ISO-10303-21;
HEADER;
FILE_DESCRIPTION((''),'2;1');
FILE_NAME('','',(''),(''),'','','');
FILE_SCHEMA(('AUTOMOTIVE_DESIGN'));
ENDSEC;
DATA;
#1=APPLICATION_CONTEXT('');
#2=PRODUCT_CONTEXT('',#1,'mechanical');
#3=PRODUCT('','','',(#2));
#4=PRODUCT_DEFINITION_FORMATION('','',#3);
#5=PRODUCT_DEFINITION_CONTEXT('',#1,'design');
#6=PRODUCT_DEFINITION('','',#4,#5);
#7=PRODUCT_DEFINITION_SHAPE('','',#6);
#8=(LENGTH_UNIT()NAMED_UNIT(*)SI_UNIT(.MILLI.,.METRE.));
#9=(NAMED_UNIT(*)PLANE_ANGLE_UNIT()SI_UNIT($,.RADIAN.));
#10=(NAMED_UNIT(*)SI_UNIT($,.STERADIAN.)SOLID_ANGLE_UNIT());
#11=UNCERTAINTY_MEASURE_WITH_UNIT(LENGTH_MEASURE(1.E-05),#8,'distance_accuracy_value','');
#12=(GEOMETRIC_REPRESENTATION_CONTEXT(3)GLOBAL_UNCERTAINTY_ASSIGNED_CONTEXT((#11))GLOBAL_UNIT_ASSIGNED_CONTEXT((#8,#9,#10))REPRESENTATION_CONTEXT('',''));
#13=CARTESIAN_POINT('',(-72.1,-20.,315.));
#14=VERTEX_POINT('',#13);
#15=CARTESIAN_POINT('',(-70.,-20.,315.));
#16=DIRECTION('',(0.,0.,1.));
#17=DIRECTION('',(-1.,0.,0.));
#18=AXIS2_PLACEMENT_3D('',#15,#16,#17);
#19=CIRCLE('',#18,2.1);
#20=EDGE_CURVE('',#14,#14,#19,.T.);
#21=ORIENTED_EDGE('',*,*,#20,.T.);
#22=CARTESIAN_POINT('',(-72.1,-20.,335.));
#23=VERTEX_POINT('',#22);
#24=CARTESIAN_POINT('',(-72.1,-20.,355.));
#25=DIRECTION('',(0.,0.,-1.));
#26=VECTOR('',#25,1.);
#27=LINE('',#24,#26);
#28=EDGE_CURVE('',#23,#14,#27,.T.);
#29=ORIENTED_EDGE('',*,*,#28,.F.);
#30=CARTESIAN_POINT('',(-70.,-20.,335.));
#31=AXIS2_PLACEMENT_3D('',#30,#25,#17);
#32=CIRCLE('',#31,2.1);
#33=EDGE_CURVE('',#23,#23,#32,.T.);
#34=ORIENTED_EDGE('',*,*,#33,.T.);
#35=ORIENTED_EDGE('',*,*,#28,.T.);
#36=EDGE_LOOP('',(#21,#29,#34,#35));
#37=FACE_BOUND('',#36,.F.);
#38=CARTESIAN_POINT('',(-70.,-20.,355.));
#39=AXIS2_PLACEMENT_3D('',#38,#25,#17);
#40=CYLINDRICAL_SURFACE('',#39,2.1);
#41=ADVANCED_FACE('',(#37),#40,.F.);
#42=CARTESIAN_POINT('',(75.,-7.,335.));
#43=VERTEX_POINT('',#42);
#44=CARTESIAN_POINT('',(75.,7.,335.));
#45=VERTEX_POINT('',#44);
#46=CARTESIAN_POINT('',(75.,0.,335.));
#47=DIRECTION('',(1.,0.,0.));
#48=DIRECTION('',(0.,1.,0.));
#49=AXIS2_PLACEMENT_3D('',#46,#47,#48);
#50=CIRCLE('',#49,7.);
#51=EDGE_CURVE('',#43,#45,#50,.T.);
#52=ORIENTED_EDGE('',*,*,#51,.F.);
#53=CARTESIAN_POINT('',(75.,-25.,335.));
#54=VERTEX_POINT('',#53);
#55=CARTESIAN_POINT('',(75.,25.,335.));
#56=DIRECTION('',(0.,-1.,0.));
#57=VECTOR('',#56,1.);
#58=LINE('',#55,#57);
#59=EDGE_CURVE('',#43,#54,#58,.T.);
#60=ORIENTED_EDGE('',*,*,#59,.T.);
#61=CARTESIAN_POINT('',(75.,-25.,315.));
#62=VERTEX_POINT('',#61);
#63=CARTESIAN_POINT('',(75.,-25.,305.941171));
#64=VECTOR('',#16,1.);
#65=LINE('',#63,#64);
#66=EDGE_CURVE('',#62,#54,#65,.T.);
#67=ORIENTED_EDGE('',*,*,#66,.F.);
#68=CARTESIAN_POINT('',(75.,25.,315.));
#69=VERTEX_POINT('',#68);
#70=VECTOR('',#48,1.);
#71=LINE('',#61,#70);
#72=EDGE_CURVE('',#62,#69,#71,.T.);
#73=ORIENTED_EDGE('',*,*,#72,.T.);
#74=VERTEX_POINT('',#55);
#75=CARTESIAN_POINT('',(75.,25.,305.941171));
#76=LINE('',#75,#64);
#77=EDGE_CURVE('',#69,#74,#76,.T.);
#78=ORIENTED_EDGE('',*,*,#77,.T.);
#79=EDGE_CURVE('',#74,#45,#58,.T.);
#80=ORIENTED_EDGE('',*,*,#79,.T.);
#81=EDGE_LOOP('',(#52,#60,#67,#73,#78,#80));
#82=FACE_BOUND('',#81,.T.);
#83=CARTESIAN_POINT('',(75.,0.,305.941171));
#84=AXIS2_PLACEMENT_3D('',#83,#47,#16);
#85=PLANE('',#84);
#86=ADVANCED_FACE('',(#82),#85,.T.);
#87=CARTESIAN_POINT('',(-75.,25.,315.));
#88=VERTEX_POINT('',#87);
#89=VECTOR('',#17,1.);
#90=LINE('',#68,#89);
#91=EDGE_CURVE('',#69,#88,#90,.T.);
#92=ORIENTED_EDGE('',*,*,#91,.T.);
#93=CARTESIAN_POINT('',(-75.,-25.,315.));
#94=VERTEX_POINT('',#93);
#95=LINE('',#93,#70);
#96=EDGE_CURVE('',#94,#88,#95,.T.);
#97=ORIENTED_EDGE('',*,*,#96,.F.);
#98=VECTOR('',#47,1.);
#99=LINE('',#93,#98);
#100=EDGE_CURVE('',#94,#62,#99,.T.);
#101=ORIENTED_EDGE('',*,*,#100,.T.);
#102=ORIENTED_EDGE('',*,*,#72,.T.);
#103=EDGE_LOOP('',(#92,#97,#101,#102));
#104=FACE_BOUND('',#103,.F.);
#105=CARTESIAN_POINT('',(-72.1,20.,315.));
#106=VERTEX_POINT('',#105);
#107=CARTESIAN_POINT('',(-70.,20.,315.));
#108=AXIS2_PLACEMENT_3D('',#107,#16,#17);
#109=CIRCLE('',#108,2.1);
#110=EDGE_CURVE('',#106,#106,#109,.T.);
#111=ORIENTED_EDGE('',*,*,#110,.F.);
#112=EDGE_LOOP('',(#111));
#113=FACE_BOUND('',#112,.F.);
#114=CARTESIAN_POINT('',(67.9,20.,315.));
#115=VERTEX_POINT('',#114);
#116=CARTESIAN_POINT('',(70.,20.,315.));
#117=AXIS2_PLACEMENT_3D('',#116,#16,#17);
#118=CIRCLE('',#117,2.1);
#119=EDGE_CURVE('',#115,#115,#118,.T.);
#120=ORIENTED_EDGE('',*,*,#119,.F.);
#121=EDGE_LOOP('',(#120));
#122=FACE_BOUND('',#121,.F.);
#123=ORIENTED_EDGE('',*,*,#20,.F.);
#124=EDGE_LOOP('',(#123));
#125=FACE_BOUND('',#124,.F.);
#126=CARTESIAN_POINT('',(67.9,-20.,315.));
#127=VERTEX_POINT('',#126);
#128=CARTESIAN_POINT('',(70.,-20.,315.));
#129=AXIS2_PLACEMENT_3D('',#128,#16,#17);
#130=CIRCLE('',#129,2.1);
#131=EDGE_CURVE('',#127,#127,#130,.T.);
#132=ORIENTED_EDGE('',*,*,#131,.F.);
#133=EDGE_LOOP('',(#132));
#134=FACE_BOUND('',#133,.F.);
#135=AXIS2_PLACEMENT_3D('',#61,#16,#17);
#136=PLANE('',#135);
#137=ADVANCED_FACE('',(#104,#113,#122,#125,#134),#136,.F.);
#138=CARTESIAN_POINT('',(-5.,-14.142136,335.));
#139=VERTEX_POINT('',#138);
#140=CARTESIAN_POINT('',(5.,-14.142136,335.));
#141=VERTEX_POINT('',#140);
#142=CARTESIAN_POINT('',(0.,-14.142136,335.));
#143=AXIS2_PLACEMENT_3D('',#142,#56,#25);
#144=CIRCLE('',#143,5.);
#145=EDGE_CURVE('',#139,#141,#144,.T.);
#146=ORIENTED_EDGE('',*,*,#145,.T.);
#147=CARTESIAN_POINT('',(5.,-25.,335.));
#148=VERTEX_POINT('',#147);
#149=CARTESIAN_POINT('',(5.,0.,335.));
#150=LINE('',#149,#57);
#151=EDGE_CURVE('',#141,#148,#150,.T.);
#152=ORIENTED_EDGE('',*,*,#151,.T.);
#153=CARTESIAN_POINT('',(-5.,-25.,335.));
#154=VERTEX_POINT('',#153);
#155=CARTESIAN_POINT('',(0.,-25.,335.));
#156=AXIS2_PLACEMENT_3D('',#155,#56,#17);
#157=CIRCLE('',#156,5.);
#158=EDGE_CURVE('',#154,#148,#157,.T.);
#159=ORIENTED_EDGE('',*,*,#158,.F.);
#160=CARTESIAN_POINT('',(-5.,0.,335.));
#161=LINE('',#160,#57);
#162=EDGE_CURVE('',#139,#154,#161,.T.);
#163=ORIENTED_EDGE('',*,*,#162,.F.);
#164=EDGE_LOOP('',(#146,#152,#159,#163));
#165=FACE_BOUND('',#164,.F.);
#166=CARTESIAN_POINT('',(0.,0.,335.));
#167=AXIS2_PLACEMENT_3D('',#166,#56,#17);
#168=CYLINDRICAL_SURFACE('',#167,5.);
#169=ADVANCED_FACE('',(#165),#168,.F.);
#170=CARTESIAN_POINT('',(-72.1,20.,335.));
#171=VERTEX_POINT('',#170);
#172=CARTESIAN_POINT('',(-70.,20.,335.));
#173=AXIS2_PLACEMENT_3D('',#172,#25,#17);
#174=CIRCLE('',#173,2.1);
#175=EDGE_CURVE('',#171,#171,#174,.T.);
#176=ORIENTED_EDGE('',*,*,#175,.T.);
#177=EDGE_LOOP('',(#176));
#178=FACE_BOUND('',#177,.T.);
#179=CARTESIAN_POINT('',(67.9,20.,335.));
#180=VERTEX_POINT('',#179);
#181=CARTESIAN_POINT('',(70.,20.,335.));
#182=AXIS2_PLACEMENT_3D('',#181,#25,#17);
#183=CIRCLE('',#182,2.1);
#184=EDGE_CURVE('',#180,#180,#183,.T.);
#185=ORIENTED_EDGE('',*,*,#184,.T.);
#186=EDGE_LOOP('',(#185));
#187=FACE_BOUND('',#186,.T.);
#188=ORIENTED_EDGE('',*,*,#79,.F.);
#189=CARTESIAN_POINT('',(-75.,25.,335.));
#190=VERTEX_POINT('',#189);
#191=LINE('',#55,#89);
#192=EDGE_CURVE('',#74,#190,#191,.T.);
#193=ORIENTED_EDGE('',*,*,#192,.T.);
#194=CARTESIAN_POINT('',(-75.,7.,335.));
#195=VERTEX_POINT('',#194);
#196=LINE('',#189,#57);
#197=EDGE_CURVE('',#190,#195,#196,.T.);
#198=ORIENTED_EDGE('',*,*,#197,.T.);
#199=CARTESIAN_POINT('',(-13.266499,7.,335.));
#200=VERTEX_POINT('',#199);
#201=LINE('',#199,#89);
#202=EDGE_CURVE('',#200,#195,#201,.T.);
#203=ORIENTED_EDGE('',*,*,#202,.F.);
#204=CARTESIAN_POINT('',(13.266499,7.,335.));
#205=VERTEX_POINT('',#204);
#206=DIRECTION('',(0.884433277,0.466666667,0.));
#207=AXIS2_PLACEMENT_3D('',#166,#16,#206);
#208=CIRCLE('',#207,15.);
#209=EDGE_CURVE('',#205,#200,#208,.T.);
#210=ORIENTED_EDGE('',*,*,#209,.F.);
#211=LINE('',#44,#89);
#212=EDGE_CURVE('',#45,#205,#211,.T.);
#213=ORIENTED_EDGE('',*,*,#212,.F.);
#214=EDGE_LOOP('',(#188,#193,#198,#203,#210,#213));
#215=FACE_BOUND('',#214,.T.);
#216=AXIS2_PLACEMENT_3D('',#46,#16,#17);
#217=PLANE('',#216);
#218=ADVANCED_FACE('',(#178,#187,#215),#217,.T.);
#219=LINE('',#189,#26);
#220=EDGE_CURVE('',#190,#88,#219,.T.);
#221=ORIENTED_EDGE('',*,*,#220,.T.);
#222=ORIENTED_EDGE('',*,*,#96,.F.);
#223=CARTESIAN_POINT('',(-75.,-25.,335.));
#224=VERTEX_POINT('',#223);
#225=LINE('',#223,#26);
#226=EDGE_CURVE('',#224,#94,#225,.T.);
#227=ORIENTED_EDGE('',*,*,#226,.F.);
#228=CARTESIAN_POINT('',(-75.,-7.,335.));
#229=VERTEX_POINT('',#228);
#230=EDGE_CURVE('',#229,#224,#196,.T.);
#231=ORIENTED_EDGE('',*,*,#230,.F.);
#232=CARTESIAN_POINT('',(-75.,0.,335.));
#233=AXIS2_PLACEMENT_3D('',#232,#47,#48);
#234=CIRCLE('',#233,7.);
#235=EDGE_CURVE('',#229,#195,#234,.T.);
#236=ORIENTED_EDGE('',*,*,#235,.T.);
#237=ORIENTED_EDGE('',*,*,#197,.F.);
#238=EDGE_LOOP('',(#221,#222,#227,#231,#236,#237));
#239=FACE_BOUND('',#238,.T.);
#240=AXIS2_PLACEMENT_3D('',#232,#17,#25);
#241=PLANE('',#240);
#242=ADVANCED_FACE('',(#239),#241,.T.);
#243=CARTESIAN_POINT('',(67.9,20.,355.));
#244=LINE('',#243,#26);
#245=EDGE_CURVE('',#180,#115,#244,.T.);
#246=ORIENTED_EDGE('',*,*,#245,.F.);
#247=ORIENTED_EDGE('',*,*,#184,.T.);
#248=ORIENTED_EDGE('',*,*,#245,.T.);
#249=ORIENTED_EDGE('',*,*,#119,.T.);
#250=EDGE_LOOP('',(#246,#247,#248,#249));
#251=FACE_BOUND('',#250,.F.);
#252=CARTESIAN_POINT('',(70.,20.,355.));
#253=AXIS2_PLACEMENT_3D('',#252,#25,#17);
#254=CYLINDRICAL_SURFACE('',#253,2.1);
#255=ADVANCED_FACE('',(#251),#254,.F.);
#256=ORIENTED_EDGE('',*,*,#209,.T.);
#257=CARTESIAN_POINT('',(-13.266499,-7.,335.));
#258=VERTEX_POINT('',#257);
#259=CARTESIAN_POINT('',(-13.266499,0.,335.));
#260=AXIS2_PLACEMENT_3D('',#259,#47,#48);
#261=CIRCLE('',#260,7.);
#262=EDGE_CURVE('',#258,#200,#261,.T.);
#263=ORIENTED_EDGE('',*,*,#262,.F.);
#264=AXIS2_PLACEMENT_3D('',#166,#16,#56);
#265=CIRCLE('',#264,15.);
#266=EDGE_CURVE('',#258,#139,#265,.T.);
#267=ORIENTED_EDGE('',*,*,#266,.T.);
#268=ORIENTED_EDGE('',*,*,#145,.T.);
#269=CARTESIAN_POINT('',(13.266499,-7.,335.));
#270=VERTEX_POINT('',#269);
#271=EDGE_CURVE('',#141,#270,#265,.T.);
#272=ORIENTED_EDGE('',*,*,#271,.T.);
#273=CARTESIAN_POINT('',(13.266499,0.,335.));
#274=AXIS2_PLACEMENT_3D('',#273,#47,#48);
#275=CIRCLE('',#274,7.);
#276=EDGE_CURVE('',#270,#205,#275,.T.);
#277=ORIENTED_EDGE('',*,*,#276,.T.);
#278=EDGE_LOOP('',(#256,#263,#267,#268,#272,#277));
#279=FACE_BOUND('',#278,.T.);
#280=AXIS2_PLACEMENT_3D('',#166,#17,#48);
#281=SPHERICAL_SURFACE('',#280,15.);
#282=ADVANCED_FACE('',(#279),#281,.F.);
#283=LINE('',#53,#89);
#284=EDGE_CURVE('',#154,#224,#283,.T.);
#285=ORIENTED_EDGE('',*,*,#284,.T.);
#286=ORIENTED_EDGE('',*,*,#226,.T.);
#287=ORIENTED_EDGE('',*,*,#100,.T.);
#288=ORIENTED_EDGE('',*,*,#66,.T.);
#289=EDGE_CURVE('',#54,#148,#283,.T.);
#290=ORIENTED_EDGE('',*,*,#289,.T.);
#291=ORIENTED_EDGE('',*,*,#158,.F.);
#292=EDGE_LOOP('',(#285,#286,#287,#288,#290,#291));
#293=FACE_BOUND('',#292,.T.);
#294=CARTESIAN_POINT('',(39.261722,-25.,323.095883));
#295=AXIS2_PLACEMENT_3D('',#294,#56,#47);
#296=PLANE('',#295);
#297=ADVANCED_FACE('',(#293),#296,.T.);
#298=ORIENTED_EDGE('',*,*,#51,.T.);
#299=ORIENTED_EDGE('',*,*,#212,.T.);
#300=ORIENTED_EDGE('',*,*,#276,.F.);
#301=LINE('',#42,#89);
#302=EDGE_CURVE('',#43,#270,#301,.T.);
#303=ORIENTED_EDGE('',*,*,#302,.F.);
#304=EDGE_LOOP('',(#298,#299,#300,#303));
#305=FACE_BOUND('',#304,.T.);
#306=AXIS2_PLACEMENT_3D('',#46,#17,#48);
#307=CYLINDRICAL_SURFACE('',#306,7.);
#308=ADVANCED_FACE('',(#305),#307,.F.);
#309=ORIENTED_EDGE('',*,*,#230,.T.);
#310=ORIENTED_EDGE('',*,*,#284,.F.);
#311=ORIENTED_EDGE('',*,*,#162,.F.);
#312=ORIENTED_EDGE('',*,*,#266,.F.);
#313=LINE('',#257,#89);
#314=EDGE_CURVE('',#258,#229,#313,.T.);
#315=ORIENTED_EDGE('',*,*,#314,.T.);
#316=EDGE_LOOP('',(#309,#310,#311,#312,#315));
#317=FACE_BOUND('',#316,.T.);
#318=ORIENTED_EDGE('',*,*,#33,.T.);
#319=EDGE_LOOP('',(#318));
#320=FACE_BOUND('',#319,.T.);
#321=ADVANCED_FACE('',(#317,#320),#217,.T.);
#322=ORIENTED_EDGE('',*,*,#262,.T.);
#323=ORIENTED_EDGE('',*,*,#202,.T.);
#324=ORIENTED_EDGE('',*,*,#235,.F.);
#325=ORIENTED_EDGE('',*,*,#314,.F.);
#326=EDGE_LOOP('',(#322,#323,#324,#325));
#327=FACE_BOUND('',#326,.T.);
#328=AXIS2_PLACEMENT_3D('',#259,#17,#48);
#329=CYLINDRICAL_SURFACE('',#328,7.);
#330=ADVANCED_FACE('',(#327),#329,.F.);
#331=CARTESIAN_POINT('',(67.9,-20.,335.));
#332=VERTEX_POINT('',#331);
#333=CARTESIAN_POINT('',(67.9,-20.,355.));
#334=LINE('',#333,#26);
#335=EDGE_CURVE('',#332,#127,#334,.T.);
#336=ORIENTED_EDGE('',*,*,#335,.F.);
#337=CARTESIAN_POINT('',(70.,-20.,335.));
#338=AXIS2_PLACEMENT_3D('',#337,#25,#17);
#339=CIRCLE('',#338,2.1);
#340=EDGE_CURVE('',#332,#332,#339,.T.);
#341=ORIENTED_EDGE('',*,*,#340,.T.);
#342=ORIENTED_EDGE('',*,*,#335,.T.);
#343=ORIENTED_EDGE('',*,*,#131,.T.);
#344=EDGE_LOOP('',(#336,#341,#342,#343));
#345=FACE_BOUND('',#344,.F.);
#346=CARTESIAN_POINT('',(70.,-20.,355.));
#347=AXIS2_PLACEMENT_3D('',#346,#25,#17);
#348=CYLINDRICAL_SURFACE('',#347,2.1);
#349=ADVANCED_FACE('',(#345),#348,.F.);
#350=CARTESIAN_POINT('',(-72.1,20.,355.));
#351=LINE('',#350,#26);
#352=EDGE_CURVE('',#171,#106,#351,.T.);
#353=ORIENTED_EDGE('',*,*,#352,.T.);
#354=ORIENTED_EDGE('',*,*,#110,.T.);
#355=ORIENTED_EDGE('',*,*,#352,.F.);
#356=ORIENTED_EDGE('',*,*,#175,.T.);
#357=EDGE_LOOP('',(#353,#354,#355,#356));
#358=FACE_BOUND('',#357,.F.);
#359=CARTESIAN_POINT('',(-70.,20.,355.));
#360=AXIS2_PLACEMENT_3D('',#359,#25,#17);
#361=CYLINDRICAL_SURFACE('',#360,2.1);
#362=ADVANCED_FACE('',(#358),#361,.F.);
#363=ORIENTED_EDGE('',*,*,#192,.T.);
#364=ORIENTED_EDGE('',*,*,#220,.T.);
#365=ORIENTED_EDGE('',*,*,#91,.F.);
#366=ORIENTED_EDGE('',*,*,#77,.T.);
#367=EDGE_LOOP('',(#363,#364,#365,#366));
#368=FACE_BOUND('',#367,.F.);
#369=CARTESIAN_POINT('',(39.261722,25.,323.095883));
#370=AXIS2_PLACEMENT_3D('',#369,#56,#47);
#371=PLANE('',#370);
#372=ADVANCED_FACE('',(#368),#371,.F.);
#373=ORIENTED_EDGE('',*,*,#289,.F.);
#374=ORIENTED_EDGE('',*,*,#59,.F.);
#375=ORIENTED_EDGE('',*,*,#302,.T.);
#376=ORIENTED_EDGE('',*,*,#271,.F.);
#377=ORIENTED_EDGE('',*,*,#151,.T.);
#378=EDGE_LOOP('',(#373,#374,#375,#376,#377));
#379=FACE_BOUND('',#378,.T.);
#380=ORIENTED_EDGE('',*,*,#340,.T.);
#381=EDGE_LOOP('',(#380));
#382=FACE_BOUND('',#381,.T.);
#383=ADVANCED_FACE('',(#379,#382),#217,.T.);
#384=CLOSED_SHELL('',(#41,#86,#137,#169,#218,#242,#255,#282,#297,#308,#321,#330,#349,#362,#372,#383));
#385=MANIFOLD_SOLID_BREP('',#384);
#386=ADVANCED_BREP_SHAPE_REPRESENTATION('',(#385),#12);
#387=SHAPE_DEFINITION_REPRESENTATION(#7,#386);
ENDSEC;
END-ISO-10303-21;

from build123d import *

# Parameters (mm, degrees)
F1_DEPTH  = 25
F5_D      = 4.2
F5_DEPTH  = 20
F5_TIP    = 1.2618073
F10_DEPTH = 50.001


with BuildPart() as f1:
    # F0 (on Front) → F1 (new body, symmetric)
    with BuildSketch(Plane.XZ):
        with BuildLine():
            ThreePointArc((0, 315), (37.7725508345, 312.7270925319), (75, 305.9411708156))
            Line((75, 305.9411708156), (75, 335))
            Line((75, 335), (0, 335))
            Line((0, 335), (0, 315))
        make_face()
        with BuildLine():
            ThreePointArc((-75, 305.9411708156), (-37.7725508345, 312.7270925319), (0, 315))
            Line((0, 315), (0, 335))
            Line((0, 335), (-75, 335))
            Line((-75, 335), (-75, 305.9411708156))
        make_face()
    extrude(amount=F1_DEPTH, both=True)

    # F2 (on face) → F3 (revolve, cut)
    with BuildSketch(Plane.XY.offset(335)):
        with BuildLine():
            Line((-13.2664991614, 7), (-75, 7))
            Line((-75, 7), (-75, 0))
            Line((-75, 0), (-15, 0))
            ThreePointArc((-15, 0), (-14.5601766373, 3.6057254872), (-13.2664991614, 7))
        make_face()
        with BuildLine():
            ThreePointArc((13.2664991614, 7), (0, 15), (-13.2664991614, 7))
            ThreePointArc((-13.2664991614, 7), (-14.5601766373, 3.6057254872), (-15, 0))
            Line((-15, 0), (-13.2664991614, 0))
            Line((-13.2664991614, 0), (13.2664991614, 0))
            Line((13.2664991614, 0), (15, 0))
            ThreePointArc((15, 0), (14.5601766373, 3.6057254872), (13.2664991614, 7))
        make_face()
        with BuildLine():
            Line((75, 7), (13.2664991614, 7))
            ThreePointArc((13.2664991614, 7), (14.5601766373, 3.6057254872), (15, 0))
            Line((15, 0), (75, 0))
            Line((75, 0), (75, 7))
        make_face()
    revolve(axis=Axis((-44.1332495807, 0, 335), (1, 0, 0)), mode=Mode.SUBTRACT)

    # F5
    with Locations(Plane.XY.offset(335)):
        with Locations((-70, 20), (-70, -20), (70, 20), (70, -20)):
            Hole(F5_D / 2, depth=F5_DEPTH)
            with Locations((0, 0, -(F5_DEPTH + F5_TIP / 2))):  # 118° drill point
                Cone(0, F5_D / 2, F5_TIP, mode=Mode.SUBTRACT)

    # F6 (on face) → F7 (revolve, cut)
    with BuildSketch(Plane.XY.offset(335)):
        with BuildLine():
            Line((0, 0), (-5, 0))
            Line((-5, 0), (-5, -14.1421356237))
            ThreePointArc((-5, -14.1421356237), (-2.5365296809, -14.7839783948), (0, -15))
            Line((0, -15), (0, 0))
        make_face()
        with BuildLine():
            ThreePointArc((0, -15), (-2.5365296809, -14.7839783948), (-5, -14.1421356237))
            Line((-5, -14.1421356237), (-5, -25))
            Line((-5, -25), (0, -25))
            Line((0, -25), (0, -15))
        make_face()
    revolve(axis=Axis((0, -12.5, 335), (0, -1, 0)), mode=Mode.SUBTRACT)

    # F9 (on face) → F10 (cut, through all)
    with BuildSketch(Plane.XZ.offset(25)):
        with BuildLine():
            ThreePointArc((0, 315), (37.7725508345, 312.7270925319), (75, 305.9411708156))
            Line((75, 305.9411708156), (75, 315))
            Line((75, 315), (0, 315))
        make_face()
        with BuildLine():
            Line((-75, 315), (-75, 305.9411708156))
            ThreePointArc((-75, 305.9411708156), (-37.7725508345, 312.7270925319), (0, 315))
            Line((0, 315), (-75, 315))
        make_face()
    extrude(amount=-F10_DEPTH, mode=Mode.SUBTRACT)


solid = f1.part
